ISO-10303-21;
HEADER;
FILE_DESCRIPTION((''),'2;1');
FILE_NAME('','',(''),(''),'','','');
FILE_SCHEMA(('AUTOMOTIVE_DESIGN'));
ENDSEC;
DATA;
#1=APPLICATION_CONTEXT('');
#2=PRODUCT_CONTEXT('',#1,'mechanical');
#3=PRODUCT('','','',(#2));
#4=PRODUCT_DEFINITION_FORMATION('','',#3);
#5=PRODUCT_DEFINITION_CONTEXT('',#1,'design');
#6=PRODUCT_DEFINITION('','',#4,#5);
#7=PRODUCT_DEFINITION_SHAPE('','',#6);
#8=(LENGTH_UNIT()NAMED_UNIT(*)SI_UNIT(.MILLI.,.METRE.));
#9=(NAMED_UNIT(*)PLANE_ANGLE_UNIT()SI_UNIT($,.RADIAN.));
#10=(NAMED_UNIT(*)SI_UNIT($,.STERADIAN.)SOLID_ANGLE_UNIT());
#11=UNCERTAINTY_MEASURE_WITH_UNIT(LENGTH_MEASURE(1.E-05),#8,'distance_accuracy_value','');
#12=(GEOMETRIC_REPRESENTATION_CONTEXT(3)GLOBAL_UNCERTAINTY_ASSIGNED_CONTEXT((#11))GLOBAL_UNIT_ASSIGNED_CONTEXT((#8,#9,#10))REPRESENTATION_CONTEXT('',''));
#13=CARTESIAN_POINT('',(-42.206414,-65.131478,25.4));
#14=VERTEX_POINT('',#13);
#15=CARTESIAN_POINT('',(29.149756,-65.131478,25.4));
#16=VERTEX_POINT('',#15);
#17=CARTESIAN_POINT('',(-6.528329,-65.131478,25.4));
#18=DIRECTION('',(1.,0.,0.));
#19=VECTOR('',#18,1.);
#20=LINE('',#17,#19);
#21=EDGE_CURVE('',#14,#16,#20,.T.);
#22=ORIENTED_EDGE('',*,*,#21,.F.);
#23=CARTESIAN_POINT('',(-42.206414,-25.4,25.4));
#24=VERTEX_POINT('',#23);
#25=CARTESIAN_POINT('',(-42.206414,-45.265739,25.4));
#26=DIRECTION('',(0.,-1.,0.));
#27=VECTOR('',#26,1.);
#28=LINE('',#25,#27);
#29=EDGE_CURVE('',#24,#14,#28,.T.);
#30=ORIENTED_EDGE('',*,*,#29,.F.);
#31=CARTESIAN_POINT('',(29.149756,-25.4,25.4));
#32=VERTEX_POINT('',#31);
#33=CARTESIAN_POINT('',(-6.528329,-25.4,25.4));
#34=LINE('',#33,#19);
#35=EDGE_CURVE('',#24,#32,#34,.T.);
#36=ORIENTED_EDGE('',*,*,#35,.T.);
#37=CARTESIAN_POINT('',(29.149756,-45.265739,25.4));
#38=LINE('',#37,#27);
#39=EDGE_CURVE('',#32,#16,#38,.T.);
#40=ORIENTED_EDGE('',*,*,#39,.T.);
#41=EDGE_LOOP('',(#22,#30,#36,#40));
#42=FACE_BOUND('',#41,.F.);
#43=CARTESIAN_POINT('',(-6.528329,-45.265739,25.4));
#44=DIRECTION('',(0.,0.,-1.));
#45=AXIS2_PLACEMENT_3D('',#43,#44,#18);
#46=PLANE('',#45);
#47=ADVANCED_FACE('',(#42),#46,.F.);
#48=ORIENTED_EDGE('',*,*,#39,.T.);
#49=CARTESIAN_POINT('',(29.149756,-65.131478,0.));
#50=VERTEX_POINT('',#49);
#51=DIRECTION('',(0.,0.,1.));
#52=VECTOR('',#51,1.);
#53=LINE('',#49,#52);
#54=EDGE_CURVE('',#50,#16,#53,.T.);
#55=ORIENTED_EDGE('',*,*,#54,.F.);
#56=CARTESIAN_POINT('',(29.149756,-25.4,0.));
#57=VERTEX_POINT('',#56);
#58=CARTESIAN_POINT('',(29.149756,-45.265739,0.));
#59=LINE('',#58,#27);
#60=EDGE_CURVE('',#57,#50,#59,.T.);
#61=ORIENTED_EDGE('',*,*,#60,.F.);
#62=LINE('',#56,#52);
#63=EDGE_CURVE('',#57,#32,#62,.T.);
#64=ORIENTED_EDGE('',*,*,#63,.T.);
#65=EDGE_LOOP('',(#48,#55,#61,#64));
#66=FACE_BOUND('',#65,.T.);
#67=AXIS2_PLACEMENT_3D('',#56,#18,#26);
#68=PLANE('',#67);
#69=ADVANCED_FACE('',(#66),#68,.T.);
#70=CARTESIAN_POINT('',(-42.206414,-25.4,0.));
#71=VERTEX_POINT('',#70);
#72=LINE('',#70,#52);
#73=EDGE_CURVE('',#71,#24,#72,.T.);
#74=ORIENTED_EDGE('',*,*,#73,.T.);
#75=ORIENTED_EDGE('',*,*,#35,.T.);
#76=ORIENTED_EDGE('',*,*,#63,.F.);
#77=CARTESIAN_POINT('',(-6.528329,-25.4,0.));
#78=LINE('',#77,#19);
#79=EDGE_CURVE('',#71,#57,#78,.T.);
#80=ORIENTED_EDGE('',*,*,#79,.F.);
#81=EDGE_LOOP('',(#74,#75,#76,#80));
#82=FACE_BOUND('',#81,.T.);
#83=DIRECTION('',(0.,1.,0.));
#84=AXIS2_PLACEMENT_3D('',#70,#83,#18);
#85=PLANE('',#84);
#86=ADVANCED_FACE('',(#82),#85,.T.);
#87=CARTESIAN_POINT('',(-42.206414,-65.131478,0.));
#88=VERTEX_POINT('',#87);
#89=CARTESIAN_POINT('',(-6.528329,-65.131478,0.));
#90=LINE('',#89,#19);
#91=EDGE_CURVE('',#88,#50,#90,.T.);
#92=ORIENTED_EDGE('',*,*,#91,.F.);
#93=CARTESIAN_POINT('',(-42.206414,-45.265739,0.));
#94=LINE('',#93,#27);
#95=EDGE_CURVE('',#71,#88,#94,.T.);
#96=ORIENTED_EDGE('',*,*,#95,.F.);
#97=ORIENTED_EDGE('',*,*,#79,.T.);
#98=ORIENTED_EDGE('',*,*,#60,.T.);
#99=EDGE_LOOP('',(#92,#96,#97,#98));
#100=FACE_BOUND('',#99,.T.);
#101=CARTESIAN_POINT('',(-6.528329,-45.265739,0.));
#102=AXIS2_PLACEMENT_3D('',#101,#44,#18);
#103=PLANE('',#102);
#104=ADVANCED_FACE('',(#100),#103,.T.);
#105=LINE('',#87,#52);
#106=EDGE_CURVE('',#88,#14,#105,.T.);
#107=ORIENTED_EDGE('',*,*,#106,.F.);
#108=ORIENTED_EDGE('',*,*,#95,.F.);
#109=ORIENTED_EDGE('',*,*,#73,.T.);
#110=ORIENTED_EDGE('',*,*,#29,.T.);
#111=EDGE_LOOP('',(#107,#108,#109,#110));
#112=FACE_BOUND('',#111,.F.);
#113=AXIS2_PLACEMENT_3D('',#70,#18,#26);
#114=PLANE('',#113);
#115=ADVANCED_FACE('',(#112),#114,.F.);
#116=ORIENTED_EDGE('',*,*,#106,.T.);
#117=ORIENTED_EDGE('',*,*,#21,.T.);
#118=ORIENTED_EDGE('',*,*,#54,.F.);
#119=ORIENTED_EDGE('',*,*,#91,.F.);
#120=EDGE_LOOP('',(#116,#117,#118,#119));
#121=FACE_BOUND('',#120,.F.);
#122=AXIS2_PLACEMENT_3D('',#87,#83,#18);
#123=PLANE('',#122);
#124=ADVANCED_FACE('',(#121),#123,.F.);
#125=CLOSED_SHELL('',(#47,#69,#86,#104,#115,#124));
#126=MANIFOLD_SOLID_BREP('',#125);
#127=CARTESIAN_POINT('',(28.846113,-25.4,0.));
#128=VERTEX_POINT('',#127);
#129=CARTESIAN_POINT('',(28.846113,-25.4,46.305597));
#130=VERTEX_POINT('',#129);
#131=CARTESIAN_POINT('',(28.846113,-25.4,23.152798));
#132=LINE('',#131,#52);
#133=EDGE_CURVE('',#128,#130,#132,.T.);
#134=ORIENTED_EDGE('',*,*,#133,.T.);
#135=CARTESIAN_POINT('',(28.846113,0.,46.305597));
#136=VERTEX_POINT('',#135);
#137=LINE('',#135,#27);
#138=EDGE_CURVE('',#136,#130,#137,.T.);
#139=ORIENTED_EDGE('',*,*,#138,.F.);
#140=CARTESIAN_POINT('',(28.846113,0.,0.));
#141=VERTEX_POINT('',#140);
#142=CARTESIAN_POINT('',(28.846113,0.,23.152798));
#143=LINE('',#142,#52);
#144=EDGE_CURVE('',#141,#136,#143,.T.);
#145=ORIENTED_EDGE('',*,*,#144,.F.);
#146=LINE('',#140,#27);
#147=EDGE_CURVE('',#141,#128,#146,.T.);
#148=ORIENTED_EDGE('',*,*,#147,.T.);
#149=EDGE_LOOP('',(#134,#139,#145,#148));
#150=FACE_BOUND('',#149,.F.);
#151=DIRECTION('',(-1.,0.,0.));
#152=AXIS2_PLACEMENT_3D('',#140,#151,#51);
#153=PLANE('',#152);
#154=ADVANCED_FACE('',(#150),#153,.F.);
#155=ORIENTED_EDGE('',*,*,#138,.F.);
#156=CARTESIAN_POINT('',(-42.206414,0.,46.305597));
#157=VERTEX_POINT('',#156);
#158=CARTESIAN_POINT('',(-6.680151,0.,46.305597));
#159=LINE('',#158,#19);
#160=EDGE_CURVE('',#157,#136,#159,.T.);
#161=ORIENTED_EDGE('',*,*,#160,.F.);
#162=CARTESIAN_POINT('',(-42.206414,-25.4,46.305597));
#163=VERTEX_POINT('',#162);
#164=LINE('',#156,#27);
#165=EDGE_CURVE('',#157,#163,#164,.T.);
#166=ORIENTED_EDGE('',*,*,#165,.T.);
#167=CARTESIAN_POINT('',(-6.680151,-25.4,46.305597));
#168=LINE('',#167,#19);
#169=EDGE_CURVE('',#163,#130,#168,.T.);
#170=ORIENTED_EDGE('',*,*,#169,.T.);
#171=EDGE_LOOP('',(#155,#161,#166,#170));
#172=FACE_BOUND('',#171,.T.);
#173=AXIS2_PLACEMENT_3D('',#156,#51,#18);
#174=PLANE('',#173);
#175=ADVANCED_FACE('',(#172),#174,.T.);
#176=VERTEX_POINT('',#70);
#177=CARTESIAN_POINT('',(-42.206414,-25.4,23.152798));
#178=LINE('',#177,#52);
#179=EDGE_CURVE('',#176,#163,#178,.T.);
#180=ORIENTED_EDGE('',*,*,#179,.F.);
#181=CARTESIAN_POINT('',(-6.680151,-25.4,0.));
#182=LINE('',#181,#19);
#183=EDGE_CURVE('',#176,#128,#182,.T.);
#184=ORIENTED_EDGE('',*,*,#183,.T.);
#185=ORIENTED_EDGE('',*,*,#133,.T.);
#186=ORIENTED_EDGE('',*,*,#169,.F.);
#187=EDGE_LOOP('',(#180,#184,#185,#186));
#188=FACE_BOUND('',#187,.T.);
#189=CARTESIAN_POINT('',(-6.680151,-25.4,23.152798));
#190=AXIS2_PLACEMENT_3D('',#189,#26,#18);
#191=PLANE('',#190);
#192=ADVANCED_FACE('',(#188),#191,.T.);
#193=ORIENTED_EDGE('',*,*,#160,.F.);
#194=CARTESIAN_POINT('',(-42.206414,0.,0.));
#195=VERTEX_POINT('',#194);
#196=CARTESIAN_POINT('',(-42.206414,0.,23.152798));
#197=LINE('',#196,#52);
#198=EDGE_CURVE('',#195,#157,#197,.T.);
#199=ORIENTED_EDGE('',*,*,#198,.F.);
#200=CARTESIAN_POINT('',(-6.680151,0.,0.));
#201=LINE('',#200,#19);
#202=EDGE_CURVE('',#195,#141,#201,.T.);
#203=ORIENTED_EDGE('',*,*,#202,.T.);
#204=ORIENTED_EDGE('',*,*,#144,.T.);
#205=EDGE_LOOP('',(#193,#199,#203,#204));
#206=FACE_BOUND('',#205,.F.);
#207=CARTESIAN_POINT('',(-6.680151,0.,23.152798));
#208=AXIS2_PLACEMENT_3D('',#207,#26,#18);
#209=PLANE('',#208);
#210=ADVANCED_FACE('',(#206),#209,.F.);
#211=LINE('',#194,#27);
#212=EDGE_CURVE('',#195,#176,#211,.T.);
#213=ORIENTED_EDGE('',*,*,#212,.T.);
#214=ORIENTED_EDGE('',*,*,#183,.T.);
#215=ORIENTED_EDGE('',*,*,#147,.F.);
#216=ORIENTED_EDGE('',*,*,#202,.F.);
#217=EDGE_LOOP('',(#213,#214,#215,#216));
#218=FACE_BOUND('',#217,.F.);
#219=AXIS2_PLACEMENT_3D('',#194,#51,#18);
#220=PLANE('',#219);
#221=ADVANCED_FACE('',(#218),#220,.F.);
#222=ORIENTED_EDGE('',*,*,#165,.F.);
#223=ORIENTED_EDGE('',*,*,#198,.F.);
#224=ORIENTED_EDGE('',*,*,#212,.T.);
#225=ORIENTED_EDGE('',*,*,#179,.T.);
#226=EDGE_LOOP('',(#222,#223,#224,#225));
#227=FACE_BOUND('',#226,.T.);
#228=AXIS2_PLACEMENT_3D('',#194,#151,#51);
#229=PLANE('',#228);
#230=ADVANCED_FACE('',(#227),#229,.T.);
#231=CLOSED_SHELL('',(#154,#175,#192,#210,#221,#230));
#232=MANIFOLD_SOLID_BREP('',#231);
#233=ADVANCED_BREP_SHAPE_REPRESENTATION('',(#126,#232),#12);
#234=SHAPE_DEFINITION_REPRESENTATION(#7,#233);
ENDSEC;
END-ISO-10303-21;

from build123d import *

# Parameters (mm, degrees)
F0_W     = 71.0525270551
F0_H     = 46.3055968285
F1_DEPTH = 25.4
F2_W     = 71.3561698794
F2_H     = 39.7314780116
F3_DEPTH = 25.4


# Not quite as in the source:
# - a feature of the source that left no trace in its solid (it failed there, or was rolled back) is left out


with BuildPart() as f1:
    # F0 (on Front) → F1 (new body)
    with BuildSketch(Plane.XZ):
        with Locations((-6.6801505163, 23.1527984142)):
            Rectangle(F0_W, F0_H)
    extrude(amount=F1_DEPTH)


with BuildPart() as f3:
    # F2 (on face) → F3 (new body)
    with BuildSketch(Plane(origin=(0, 0, 0), x_dir=(1, 0, 0), z_dir=(0, 0, -1))):
        with Locations((-6.5283291042, 45.2657390058)):
            Rectangle(F2_W, F2_H)
    extrude(amount=-F3_DEPTH)


solid = Compound([f1.part, f3.part])
